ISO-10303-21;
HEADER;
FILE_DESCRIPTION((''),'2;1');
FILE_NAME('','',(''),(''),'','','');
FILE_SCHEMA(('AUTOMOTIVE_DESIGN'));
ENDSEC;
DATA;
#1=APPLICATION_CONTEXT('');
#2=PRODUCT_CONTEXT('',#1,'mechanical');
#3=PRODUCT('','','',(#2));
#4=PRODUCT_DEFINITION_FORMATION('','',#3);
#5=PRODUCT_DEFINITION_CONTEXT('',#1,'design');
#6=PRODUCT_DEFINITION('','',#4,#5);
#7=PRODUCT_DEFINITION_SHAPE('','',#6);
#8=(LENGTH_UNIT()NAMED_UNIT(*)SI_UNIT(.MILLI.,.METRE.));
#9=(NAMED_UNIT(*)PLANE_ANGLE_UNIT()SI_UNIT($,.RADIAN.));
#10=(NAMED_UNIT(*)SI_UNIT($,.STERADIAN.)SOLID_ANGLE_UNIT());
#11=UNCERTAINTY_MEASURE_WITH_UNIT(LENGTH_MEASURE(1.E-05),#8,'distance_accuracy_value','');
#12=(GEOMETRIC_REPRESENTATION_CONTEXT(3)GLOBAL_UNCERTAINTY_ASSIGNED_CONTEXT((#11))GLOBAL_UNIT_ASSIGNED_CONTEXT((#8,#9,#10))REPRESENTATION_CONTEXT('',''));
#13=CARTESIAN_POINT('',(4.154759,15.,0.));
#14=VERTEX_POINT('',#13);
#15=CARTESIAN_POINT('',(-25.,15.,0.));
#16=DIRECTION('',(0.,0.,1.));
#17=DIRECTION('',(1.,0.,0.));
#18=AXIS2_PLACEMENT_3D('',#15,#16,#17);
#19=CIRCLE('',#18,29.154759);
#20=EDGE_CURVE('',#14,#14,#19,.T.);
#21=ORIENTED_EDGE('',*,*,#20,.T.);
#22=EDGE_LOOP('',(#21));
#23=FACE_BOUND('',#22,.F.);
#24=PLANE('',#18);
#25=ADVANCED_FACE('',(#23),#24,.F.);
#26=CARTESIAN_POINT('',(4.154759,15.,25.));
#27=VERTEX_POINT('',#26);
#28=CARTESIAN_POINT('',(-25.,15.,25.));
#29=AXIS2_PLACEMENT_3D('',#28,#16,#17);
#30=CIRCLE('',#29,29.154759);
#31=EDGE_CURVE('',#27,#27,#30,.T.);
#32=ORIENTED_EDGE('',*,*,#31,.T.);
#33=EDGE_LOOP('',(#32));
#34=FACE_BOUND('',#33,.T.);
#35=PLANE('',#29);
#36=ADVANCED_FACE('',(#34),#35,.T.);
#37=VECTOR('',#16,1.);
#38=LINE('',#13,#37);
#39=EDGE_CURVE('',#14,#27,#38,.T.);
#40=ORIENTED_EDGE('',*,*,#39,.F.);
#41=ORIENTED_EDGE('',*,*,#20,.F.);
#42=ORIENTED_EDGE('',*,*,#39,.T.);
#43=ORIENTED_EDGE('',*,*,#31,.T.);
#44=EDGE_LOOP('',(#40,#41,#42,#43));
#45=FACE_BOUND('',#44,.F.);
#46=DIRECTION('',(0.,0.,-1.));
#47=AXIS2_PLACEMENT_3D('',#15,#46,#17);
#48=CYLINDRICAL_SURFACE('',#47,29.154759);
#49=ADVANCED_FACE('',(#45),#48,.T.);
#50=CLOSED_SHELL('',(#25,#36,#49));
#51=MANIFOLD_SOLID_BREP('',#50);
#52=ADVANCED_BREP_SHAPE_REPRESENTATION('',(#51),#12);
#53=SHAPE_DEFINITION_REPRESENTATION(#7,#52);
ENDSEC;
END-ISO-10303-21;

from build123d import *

# Parameters (mm, degrees)
F0_R     = 29.1547594742
F1_DEPTH = 25


# Not quite as in the source:
# - a feature of the source that left no trace in its solid (it failed there, or was rolled back) is left out


with BuildPart() as f1:
    # F0 (on Top) → F1 (new body)
    with BuildSketch(Plane.XY):
        with Locations((-25, 15)):
            Circle(F0_R)
    extrude(amount=F1_DEPTH)


solid = f1.part
